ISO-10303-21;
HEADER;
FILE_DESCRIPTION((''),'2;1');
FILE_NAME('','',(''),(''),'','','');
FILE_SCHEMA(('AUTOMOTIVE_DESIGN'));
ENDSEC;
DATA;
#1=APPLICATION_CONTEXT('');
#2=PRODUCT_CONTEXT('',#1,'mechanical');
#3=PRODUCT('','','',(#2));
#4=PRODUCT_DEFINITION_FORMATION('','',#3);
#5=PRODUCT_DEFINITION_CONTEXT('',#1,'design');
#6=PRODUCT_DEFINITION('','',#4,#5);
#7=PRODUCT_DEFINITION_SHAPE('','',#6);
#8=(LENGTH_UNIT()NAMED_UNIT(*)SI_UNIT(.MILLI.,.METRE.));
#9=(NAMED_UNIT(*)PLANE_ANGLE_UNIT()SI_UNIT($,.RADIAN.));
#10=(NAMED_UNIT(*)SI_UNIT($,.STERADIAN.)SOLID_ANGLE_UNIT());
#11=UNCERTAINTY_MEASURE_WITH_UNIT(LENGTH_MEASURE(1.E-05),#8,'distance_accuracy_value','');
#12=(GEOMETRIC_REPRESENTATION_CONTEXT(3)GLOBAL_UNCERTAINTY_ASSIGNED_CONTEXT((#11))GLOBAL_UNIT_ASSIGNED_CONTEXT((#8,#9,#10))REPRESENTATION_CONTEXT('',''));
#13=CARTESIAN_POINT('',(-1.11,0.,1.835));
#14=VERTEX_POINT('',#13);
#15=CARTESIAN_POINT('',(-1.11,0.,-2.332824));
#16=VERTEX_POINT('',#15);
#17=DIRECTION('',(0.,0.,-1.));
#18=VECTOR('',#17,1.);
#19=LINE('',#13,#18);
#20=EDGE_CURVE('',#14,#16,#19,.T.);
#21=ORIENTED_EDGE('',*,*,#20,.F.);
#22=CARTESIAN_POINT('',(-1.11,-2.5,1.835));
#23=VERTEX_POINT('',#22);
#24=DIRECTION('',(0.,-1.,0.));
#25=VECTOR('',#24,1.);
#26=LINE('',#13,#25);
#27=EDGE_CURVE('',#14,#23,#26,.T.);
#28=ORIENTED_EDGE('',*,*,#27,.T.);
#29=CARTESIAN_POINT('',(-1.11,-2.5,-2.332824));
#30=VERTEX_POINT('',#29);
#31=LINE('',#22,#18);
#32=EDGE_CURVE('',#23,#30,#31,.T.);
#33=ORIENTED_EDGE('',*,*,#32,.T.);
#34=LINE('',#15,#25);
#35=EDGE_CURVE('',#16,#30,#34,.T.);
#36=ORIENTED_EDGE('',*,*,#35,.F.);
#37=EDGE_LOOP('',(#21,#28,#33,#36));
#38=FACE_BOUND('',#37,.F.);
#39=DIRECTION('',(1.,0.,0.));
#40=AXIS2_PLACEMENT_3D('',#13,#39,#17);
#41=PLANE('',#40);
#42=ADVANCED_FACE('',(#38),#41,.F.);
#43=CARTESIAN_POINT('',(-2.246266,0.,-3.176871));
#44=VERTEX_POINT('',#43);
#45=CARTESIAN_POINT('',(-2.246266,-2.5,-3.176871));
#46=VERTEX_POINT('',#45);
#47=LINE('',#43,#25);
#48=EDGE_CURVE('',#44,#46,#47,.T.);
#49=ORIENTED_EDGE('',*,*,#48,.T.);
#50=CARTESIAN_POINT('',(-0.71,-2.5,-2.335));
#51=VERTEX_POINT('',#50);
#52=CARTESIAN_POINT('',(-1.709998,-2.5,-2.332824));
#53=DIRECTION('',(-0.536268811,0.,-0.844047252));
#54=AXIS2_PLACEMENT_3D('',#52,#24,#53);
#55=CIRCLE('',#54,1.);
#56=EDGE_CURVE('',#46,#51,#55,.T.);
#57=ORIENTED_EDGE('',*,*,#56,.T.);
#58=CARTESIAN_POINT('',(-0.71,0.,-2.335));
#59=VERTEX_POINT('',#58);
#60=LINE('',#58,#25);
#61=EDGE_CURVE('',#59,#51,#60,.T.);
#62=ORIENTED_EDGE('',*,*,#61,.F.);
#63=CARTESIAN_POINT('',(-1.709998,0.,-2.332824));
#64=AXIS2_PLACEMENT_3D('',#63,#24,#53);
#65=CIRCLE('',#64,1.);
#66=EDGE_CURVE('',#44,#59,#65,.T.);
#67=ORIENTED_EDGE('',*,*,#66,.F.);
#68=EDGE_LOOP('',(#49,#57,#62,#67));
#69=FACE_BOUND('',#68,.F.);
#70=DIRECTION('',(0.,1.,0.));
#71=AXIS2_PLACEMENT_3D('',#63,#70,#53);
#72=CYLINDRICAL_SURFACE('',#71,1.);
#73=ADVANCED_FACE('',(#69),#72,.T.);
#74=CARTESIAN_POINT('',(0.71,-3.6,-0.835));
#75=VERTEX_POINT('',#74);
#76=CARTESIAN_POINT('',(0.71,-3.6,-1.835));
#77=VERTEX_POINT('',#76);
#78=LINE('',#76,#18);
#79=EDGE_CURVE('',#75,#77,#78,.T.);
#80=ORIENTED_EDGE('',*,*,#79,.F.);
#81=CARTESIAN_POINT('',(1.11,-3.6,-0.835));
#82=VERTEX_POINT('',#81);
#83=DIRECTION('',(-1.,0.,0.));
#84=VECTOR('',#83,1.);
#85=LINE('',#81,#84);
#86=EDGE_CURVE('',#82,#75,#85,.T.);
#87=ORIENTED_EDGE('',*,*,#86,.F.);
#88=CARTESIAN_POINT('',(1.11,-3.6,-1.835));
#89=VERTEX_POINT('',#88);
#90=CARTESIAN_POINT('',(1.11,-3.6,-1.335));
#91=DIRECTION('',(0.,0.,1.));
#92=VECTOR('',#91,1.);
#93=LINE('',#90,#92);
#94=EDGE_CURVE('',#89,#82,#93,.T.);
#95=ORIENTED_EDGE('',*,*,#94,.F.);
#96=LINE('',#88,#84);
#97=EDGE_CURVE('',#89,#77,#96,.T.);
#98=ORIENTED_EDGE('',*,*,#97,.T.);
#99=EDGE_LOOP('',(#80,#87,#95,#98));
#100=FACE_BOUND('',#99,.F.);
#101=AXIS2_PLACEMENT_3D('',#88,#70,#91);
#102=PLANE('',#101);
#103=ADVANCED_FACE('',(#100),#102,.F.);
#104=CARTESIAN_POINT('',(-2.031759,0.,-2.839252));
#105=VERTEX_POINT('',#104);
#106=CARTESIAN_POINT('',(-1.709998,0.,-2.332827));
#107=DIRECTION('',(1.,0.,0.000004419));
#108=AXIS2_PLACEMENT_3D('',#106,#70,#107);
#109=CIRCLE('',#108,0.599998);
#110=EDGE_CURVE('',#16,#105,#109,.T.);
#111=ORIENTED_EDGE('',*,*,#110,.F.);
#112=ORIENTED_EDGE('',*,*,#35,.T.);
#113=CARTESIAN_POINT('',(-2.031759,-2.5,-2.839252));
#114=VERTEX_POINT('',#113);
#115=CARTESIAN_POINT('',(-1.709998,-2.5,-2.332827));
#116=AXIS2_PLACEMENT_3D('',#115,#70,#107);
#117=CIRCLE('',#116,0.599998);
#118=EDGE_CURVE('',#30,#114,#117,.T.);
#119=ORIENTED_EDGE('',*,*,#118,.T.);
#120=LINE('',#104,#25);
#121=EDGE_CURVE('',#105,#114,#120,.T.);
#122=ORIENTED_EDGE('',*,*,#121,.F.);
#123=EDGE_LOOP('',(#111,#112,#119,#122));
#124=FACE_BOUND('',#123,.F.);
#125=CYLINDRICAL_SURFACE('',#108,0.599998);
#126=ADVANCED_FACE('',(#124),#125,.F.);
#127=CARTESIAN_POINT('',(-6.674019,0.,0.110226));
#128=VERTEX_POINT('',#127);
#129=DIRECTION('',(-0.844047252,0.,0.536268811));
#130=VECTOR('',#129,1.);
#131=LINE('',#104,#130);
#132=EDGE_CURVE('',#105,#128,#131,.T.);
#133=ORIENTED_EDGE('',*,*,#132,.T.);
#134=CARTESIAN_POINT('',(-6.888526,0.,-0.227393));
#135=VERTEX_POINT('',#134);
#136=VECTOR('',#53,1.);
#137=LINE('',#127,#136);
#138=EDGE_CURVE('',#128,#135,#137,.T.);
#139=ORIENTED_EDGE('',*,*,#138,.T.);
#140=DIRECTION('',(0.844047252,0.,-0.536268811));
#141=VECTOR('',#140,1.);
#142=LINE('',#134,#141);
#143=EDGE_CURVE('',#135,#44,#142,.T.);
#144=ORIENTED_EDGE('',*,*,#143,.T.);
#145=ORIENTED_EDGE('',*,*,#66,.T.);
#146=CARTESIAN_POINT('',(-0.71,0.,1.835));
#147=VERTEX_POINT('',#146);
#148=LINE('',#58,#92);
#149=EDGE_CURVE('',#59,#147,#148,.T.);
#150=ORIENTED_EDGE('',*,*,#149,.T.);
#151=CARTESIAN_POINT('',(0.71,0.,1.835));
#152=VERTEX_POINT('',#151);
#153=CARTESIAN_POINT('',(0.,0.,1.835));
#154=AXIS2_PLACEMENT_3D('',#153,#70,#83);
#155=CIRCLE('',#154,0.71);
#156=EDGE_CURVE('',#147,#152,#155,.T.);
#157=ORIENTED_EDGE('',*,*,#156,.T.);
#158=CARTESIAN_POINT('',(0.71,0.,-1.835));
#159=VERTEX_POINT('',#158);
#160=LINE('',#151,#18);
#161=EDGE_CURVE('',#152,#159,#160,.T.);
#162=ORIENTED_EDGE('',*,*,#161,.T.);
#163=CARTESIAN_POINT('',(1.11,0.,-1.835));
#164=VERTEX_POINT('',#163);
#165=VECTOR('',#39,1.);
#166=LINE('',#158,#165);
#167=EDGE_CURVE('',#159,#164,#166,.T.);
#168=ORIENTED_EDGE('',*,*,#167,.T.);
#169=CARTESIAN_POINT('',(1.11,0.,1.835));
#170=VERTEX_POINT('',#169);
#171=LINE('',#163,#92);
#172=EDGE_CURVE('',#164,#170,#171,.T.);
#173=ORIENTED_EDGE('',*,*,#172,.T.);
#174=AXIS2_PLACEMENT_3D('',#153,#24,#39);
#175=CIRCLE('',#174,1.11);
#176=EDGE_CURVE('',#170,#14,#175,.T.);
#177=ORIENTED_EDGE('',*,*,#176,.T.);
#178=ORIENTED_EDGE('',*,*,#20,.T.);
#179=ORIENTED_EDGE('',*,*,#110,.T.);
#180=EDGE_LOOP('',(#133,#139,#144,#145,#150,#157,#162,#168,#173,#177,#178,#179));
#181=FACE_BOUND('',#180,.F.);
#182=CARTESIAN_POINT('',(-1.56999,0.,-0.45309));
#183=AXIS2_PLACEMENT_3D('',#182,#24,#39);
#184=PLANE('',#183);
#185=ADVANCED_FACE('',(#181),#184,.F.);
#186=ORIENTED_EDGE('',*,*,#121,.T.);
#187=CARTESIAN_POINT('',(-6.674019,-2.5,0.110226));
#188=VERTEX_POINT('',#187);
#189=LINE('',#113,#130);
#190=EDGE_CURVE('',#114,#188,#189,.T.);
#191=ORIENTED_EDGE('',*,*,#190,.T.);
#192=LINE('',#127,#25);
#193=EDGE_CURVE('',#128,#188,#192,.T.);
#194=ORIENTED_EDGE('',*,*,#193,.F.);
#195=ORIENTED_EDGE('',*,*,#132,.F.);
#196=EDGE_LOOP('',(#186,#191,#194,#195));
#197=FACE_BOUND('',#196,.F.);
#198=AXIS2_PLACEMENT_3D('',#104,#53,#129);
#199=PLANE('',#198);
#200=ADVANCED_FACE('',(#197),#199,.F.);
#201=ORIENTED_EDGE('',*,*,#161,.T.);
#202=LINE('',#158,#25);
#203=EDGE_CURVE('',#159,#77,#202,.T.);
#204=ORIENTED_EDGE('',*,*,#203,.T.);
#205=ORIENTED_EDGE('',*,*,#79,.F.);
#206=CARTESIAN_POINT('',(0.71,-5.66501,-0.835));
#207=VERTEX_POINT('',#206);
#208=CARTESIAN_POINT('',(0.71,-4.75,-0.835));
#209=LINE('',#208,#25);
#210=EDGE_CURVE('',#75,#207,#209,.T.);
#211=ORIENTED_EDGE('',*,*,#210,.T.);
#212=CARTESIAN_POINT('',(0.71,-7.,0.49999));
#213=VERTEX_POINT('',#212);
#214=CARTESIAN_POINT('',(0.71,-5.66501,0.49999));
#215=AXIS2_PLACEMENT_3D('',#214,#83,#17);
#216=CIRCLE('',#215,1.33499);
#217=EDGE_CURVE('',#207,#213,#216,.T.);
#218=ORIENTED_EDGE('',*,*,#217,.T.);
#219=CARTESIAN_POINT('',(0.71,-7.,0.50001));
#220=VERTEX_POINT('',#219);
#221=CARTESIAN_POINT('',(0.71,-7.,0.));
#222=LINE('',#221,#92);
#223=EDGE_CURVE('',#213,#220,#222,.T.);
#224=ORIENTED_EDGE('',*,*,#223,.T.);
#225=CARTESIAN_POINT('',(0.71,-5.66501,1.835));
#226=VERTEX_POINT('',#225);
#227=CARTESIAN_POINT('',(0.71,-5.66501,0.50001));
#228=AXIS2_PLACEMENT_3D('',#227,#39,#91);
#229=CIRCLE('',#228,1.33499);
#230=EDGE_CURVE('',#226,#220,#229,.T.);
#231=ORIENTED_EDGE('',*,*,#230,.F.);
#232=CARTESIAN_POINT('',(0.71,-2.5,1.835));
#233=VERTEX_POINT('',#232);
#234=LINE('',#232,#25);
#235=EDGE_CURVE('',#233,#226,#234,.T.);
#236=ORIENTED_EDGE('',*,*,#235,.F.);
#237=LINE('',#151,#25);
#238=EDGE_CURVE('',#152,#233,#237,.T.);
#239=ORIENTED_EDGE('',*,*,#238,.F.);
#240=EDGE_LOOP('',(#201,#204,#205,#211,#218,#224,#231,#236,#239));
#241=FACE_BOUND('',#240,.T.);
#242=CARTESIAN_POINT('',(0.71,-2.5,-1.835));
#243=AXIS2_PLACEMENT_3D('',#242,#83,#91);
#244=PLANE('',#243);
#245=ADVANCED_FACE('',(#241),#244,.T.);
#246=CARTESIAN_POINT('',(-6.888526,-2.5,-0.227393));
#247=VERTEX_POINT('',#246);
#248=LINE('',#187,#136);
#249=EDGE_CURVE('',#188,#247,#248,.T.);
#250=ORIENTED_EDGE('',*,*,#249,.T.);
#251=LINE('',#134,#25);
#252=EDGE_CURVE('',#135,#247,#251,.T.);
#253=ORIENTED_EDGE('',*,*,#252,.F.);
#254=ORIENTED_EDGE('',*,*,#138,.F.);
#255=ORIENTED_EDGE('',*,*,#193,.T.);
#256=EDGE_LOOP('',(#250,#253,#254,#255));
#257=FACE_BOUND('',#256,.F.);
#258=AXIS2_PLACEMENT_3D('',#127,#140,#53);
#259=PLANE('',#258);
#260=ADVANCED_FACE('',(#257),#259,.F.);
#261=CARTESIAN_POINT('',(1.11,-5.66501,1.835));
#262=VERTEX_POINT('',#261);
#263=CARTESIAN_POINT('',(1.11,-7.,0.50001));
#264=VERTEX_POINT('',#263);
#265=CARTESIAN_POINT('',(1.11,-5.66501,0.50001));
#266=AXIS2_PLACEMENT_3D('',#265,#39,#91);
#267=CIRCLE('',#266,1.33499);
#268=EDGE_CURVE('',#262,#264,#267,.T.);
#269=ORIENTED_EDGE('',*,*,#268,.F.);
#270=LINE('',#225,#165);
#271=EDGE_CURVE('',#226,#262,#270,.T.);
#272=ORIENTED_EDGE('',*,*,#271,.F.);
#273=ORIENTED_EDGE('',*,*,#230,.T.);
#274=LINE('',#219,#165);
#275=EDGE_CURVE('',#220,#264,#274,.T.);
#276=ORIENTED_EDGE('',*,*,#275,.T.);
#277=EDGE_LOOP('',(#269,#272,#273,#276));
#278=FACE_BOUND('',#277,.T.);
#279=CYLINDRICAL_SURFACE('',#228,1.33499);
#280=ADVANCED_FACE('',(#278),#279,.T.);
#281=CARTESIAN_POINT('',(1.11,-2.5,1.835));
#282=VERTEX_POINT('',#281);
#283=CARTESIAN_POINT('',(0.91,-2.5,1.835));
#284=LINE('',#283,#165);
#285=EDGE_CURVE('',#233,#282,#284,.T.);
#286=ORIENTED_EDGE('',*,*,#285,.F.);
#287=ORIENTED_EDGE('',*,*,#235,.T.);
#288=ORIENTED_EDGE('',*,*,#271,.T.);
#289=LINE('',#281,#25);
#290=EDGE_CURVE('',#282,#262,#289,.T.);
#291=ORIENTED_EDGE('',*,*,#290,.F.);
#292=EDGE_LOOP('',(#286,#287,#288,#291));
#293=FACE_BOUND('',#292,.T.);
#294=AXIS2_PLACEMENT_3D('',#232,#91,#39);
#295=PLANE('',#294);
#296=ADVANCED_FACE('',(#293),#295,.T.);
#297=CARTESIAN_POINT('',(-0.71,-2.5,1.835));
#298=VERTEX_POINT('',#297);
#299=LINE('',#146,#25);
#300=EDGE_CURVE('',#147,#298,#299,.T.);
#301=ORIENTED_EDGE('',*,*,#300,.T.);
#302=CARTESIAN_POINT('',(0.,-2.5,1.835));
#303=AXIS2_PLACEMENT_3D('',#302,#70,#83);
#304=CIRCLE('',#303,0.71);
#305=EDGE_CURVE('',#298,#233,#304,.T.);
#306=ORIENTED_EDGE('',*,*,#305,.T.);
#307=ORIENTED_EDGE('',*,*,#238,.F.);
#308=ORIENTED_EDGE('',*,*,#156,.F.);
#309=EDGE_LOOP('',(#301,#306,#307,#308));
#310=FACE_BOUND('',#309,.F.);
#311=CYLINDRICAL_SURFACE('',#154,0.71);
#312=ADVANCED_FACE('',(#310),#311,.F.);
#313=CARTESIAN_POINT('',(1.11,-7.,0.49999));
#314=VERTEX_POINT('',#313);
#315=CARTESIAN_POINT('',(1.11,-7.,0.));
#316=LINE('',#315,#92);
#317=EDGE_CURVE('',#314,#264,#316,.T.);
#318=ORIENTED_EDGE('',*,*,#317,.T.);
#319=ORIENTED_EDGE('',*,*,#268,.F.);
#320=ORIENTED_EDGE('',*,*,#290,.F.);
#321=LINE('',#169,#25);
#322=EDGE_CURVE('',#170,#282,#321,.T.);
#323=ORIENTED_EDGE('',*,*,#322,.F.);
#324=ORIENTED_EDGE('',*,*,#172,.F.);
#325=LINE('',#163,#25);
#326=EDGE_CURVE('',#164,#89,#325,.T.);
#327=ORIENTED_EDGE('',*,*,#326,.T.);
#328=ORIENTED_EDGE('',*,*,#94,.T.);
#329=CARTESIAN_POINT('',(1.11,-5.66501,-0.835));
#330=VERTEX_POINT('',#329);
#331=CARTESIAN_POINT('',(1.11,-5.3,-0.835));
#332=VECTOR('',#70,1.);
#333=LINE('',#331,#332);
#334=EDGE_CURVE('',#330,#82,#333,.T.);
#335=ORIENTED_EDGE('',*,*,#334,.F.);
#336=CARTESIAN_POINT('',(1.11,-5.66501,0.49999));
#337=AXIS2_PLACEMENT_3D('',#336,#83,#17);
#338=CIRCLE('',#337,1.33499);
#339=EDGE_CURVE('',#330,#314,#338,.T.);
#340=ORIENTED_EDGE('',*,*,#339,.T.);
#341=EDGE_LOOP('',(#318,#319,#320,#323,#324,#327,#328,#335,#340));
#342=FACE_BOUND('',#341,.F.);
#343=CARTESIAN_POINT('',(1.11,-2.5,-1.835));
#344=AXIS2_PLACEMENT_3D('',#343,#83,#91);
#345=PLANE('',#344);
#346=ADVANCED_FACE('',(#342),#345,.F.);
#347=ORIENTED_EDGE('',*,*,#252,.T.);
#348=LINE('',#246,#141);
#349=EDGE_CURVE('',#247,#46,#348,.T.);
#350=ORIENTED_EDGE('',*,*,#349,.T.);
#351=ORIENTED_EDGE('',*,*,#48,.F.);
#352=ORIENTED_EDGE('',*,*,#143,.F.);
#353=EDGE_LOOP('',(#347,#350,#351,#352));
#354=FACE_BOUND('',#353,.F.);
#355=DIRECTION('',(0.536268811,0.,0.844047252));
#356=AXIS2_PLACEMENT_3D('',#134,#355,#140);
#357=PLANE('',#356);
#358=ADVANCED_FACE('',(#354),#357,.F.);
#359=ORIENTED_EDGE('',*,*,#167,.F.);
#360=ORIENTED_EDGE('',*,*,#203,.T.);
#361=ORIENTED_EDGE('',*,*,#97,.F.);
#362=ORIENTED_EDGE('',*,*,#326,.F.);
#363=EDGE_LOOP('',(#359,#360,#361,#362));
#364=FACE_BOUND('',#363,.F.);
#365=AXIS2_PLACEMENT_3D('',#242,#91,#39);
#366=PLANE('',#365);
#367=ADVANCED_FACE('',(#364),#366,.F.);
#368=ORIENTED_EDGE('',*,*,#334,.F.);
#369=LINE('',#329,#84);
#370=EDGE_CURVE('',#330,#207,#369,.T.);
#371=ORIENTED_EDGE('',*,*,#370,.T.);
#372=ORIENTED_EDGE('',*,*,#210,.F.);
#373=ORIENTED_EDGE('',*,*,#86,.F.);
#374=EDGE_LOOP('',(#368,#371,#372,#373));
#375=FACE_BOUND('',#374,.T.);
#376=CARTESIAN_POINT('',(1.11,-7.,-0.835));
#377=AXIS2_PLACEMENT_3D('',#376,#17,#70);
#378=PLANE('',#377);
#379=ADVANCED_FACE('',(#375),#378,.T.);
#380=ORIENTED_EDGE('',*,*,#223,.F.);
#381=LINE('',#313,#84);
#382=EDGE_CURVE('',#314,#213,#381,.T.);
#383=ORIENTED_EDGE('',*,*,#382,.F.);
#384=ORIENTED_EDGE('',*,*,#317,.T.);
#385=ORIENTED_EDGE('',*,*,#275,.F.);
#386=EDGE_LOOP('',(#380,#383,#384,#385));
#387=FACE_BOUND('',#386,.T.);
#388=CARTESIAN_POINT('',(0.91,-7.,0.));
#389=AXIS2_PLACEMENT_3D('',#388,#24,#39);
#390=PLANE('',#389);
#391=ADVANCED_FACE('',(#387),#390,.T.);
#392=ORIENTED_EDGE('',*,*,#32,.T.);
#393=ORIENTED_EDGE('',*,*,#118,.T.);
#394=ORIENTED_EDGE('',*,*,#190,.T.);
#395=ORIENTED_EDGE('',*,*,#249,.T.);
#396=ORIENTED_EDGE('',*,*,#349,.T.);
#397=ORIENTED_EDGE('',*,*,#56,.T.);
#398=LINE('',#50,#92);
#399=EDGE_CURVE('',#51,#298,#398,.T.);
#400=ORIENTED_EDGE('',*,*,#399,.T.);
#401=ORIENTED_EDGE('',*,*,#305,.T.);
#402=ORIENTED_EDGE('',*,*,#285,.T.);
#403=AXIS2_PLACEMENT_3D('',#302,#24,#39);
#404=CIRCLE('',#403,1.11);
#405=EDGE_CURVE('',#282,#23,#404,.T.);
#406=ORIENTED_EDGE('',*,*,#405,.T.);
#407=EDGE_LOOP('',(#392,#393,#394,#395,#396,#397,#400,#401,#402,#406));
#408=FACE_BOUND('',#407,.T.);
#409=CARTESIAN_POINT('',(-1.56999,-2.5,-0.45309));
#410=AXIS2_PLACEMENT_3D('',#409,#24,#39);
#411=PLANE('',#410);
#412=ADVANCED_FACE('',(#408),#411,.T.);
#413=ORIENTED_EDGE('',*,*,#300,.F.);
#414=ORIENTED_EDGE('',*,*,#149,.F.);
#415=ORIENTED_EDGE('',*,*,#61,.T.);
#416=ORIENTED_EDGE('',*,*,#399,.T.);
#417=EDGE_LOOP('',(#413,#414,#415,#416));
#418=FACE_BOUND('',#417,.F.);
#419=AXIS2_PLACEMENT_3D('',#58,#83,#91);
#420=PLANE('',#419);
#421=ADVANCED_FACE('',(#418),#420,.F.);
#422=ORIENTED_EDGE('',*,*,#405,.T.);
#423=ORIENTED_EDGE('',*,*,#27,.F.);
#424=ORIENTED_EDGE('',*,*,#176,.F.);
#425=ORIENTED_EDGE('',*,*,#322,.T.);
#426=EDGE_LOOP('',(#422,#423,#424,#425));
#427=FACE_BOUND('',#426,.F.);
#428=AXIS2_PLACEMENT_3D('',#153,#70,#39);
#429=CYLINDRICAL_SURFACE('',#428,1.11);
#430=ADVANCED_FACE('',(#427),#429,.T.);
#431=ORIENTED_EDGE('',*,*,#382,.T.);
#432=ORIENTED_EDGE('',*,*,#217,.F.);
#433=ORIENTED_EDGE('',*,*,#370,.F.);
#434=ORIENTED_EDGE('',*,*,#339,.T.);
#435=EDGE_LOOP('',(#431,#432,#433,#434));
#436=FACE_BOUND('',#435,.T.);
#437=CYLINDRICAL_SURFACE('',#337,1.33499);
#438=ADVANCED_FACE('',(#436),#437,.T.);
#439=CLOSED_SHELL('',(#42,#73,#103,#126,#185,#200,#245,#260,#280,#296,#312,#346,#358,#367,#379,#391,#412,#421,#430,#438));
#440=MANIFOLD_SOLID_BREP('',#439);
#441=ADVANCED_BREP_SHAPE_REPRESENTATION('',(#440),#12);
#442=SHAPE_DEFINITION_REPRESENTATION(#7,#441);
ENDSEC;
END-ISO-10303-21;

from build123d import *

# Parameters (mm, degrees)
F1_DEPTH = 2.5
F2_W     = 0.4
F2_H     = 3.67
F3_DEPTH = 4.5
F4_W     = 3.4
F4_H     = 1
F5_DEPTH = 25
F6_R     = 1.33499


# Not quite as in the source:
# - a fillet or chamfer is up to 0.001 mm smaller than in the source, because OpenCascade refuses the exact size
# - ends of sketch curves that miss each other by under 0.0002 mm in the source are joined


with BuildPart() as f1:
    # F0 (on Front) → F1 (new body)
    with BuildSketch(Plane.XZ):
        with BuildLine():
            Line((0.71, 1.835), (0.71, -1.835))
            Line((0.71, -1.835), (1.11, -1.835))
            Line((1.11, -1.835), (1.11, 1.835))
            ThreePointArc((1.11, 1.835), (0, 2.945), (-1.11, 1.835))
            Line((-1.11, 1.835), (-1.11, -2.3328240747))
            ThreePointArc((-1.11, -2.3328240747), (-1.421083088, -2.8586837383), (-2.031758919, -2.8392524256))
            Line((-2.031758919, -2.8392524256), (-6.6740188024, 0.1102260326))
            Line((-6.6740188024, 0.1102260326), (-6.8885263266, -0.227392868))
            Line((-6.8885263266, -0.227392868), (-2.2462664432, -3.1768713262))
            ThreePointArc((-2.2462664432, -3.1768713262), (-1.2294272033, -3.2097802095), (-0.71, -2.335))
            Line((-0.71, -2.335), (-0.71, 1.835))
            ThreePointArc((-0.71, 1.835), (0, 2.545), (0.71, 1.835))
        make_face()
    extrude(amount=F1_DEPTH)

    # F2 (on face) → F3 (join)
    with BuildSketch(Plane.XZ.offset(2.5)):
        with Locations((0.91, 0)):
            Rectangle(F2_W, F2_H)
    extrude(amount=F3_DEPTH)

    # F4 (on face) → F5 (cut)
    with BuildSketch(Plane.YZ.offset(1.11)):
        with Locations((-5.3, -1.335)):
            Rectangle(F4_W, F4_H)
    extrude(amount=-F5_DEPTH, mode=Mode.SUBTRACT)

    # F6 (radius 1.335 in the source; OpenCascade refuses exactly that, so slightly less here)
    f6_edges = [f1.edges().sort_by_distance(p)[0] for p in [
        (0.91, -7, 1.835),
        (0.91, -7, -0.835),
    ]]
    fillet(f6_edges, radius=F6_R)


solid = f1.part
